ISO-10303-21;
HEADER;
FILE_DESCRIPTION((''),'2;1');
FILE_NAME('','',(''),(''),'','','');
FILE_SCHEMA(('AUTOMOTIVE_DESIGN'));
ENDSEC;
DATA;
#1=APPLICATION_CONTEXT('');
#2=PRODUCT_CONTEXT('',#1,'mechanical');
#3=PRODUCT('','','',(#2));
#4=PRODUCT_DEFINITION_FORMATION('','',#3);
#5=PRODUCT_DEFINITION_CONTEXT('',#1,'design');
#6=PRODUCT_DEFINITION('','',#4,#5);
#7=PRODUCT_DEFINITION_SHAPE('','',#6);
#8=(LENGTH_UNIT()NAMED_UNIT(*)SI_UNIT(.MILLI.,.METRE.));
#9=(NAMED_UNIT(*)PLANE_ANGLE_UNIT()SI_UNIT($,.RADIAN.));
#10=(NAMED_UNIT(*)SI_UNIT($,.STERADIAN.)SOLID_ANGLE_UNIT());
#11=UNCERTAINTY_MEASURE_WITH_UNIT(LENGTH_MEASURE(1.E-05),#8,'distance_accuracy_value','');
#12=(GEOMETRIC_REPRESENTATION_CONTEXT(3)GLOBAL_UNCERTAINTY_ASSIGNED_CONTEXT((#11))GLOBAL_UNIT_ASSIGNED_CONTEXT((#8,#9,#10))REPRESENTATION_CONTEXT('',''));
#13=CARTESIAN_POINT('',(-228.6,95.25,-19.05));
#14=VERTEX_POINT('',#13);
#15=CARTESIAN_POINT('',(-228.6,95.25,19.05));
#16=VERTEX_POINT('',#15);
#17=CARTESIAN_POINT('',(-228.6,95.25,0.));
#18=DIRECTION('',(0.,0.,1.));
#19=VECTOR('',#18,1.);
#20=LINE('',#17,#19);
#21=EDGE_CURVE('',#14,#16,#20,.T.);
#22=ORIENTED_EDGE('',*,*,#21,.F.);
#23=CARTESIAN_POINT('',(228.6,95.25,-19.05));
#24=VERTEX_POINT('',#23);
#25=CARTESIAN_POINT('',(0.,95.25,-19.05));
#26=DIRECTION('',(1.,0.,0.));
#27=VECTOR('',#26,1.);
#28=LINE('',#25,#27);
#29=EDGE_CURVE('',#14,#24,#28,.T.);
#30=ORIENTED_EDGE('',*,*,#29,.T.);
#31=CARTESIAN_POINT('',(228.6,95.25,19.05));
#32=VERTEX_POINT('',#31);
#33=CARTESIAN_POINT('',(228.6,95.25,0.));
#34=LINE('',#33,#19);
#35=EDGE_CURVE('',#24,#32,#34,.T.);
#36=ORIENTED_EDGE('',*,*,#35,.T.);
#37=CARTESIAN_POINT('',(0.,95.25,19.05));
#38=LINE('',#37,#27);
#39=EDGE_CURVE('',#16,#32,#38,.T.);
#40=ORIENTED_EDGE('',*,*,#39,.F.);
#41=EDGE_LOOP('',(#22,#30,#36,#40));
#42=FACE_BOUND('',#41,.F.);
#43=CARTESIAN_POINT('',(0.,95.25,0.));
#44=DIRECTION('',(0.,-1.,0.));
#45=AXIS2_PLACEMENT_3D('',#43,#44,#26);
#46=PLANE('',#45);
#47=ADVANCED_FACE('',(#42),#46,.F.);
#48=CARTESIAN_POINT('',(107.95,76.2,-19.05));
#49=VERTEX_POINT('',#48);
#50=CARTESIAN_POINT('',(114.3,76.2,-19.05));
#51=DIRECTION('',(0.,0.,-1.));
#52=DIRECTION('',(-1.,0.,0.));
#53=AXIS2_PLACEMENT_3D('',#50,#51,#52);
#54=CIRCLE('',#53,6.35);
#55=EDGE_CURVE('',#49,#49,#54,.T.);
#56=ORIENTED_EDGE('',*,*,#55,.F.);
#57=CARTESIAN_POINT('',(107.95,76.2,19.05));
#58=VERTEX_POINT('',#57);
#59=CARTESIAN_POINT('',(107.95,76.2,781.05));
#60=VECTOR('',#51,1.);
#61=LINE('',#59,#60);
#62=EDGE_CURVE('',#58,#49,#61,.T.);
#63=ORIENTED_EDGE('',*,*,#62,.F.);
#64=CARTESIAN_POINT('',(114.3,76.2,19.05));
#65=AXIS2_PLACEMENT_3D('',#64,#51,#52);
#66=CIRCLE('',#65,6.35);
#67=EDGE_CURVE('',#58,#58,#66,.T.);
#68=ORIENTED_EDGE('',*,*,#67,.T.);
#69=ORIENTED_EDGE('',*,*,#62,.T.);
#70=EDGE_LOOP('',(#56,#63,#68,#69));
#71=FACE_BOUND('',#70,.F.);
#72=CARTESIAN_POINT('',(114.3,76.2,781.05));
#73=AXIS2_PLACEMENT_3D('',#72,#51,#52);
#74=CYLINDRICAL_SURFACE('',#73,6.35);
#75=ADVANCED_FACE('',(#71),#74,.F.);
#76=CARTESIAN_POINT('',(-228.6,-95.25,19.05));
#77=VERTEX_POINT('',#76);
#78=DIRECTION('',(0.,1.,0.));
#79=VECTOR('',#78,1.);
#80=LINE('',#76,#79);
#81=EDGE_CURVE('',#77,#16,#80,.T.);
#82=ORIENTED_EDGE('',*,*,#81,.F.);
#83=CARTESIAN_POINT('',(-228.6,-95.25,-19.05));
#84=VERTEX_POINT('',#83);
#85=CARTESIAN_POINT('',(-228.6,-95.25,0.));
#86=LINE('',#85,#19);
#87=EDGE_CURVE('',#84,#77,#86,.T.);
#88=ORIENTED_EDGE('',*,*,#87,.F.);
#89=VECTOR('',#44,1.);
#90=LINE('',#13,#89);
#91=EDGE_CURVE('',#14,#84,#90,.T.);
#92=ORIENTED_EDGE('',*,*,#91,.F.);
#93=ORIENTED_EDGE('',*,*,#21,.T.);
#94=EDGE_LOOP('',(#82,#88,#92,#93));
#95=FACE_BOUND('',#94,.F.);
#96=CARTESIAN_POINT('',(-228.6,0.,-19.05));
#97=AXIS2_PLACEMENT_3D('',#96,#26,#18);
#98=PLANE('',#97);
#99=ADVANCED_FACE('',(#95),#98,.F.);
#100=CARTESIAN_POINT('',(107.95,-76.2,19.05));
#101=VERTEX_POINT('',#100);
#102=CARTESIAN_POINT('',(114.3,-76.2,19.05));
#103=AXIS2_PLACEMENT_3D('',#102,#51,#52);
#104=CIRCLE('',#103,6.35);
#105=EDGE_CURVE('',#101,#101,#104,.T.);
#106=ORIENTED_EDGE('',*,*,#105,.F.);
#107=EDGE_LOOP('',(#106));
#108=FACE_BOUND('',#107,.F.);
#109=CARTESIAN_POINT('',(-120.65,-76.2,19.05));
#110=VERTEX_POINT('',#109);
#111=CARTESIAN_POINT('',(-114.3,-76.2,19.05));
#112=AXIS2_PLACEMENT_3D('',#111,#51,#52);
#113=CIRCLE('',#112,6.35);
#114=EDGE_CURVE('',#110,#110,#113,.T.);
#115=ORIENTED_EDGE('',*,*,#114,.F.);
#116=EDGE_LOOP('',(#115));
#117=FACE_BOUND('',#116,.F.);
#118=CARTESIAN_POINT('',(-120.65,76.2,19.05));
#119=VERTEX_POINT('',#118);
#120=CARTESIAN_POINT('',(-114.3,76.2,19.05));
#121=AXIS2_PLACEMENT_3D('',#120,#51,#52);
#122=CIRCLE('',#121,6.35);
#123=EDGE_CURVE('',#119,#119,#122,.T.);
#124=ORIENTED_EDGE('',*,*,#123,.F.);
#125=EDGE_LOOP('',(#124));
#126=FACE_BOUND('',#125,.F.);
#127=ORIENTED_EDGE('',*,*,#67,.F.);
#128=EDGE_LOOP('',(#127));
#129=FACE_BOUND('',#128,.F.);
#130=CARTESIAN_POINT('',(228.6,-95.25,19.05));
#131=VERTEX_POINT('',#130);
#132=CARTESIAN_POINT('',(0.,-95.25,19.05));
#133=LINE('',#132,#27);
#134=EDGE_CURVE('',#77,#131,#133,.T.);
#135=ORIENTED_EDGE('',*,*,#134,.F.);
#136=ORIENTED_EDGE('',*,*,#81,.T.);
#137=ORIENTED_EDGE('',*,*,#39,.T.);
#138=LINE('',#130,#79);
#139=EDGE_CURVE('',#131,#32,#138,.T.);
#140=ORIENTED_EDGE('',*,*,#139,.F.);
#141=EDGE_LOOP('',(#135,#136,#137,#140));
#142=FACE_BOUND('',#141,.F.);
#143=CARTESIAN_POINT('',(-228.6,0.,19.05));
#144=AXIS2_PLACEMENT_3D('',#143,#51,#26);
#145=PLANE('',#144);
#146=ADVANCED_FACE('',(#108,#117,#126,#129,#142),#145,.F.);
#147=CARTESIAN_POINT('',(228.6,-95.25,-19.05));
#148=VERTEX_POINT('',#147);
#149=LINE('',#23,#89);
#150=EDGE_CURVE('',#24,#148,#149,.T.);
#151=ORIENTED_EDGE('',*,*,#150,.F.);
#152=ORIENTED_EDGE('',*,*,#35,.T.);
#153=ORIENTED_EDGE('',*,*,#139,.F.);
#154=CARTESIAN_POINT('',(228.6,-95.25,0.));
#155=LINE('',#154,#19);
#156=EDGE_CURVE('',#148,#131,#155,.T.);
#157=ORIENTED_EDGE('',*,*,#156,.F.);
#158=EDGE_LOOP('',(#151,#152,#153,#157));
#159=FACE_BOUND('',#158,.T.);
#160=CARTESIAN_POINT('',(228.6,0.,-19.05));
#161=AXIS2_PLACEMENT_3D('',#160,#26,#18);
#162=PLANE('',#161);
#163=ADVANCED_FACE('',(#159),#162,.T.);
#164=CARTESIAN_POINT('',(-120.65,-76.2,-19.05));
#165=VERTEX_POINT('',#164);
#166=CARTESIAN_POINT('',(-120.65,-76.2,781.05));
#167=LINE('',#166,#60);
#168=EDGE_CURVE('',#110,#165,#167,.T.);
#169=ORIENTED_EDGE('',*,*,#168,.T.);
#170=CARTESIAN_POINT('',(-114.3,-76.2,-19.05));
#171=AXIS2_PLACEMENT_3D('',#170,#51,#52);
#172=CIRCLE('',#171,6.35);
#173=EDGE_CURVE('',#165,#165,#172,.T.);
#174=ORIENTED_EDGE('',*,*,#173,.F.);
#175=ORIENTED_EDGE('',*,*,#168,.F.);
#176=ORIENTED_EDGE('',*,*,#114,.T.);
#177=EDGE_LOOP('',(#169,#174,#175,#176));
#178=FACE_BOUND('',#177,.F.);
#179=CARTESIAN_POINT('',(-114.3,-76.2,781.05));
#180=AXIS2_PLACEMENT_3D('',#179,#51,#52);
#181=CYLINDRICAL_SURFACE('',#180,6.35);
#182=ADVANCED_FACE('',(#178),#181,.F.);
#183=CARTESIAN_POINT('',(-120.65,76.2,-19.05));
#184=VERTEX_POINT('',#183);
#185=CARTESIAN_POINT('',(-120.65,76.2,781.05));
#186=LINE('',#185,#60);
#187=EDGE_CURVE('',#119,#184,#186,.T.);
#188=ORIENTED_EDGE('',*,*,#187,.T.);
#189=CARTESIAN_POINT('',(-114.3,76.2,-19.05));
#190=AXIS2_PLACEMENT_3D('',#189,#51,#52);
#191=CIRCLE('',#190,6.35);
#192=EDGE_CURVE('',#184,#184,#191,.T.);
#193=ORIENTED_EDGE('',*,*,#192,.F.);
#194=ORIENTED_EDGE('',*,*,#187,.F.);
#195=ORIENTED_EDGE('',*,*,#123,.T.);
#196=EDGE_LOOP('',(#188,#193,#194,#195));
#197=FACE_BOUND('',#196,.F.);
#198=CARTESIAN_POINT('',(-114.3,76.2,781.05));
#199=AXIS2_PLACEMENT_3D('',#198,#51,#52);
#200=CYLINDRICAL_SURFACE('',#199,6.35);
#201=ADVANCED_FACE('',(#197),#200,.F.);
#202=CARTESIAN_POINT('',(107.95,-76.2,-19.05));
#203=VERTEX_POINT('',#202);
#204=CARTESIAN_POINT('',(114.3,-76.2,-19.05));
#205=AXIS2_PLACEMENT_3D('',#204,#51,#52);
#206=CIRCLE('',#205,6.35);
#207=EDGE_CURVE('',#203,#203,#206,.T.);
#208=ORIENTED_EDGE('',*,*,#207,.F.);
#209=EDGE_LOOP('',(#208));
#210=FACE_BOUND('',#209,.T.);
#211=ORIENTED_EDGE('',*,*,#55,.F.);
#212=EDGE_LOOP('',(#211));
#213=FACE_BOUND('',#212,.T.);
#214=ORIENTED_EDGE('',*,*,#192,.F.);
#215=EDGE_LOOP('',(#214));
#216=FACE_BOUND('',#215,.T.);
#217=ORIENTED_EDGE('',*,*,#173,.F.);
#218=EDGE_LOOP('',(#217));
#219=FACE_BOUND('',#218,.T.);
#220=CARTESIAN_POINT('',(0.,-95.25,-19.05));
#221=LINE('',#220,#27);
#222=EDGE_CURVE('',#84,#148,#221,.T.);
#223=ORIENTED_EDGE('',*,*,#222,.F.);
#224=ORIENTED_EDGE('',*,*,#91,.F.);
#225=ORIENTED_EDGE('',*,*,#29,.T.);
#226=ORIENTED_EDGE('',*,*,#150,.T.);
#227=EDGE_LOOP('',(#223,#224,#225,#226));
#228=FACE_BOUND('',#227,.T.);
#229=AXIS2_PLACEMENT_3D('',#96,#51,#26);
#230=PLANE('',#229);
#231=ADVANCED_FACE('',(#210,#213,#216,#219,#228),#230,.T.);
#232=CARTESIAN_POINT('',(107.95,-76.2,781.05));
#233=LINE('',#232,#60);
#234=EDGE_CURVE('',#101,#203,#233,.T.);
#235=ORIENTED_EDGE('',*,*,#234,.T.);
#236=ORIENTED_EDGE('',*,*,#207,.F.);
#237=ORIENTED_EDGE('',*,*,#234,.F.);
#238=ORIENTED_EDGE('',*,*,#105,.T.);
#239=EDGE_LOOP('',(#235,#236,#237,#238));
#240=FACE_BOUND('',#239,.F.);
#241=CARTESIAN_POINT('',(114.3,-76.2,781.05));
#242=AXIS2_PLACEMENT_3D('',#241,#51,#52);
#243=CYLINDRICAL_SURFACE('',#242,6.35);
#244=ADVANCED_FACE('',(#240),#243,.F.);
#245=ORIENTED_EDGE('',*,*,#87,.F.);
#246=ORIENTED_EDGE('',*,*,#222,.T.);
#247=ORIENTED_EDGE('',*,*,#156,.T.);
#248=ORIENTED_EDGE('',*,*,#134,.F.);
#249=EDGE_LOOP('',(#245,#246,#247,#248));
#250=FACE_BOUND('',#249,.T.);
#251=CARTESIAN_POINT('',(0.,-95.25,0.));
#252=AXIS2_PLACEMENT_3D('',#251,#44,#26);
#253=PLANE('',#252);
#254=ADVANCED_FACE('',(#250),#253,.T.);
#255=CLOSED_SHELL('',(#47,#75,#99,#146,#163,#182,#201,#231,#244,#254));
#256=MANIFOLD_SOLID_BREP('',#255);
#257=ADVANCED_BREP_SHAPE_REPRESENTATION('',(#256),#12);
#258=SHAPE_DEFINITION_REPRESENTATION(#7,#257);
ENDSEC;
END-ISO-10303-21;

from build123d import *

# Parameters (mm, degrees)
F0_W       = 457.2
F0_H       = 38.1
F1_DEPTH   = 95.25
F4_D       = 12.7
F4_DEPTH   = 609.6
F4_TIP     = 3.8154649308
F4_2_D     = 12.7
F4_2_DEPTH = 609.6
F4_2_TIP   = 3.8154649308
F5_D       = 12.7
F5_DEPTH   = 609.6
F5_TIP     = 3.8154649308
F5_2_D     = 12.7
F5_2_DEPTH = 609.6
F5_2_TIP   = 3.8154649308
F6_D       = 12.7
F6_DEPTH   = 609.6
F6_TIP     = 3.8154649308
F6_2_D     = 12.7
F6_2_DEPTH = 609.6
F6_2_TIP   = 3.8154649308
F7_D       = 12.7
F7_DEPTH   = 609.6
F7_TIP     = 3.8154649308
F7_2_D     = 12.7
F7_2_DEPTH = 609.6
F7_2_TIP   = 3.8154649308


# Not quite as in the source:
# - a feature names something its author has since deleted; it is built from what else it names


with BuildPart() as f1:
    # F0 (on Front) → F1 (new body, symmetric)
    with BuildSketch(Plane.XZ):
        Rectangle(F0_W, F0_H)
    extrude(amount=F1_DEPTH, both=True)


with BuildPart() as f2_1:
    # F2: copy of F1
    add(f1.part.moved(Location((0, 0, 152.4))))

    # F4#2
    with Locations(Plane.XY.offset(171.45)):
        with Locations((-114.3, 76.2)):
            Hole(F4_2_D / 2, depth=F4_2_DEPTH)
            with Locations((0, 0, -(F4_2_DEPTH + F4_2_TIP / 2))):  # 118° drill point
                Cone(0, F4_2_D / 2, F4_2_TIP, mode=Mode.SUBTRACT)

    # F5#2
    with Locations(Plane.XY.offset(171.45)):
        with Locations((114.3, 76.2)):
            Hole(F5_2_D / 2, depth=F5_2_DEPTH)
            with Locations((0, 0, -(F5_2_DEPTH + F5_2_TIP / 2))):  # 118° drill point
                Cone(0, F5_2_D / 2, F5_2_TIP, mode=Mode.SUBTRACT)

    # F6#2
    with Locations(Plane.XY.offset(171.45)):
        with Locations((-114.3, -76.2)):
            Hole(F6_2_D / 2, depth=F6_2_DEPTH)
            with Locations((0, 0, -(F6_2_DEPTH + F6_2_TIP / 2))):  # 118° drill point
                Cone(0, F6_2_D / 2, F6_2_TIP, mode=Mode.SUBTRACT)

    # F7#2
    with Locations(Plane.XY.offset(171.45)):
        with Locations((114.3, -76.2)):
            Hole(F7_2_D / 2, depth=F7_2_DEPTH)
            with Locations((0, 0, -(F7_2_DEPTH + F7_2_TIP / 2))):  # 118° drill point
                Cone(0, F7_2_D / 2, F7_2_TIP, mode=Mode.SUBTRACT)


with BuildPart() as f1_1:
    add(f1.part)

    # F4
    with Locations(Plane.XY.offset(171.45)):
        with Locations((-114.3, 76.2)):
            Hole(F4_D / 2, depth=F4_DEPTH)
            with Locations((0, 0, -(F4_DEPTH + F4_TIP / 2))):  # 118° drill point
                Cone(0, F4_D / 2, F4_TIP, mode=Mode.SUBTRACT)

    # F5
    with Locations(Plane.XY.offset(171.45)):
        with Locations((114.3, 76.2)):
            Hole(F5_D / 2, depth=F5_DEPTH)
            with Locations((0, 0, -(F5_DEPTH + F5_TIP / 2))):  # 118° drill point
                Cone(0, F5_D / 2, F5_TIP, mode=Mode.SUBTRACT)

    # F6
    with Locations(Plane.XY.offset(171.45)):
        with Locations((-114.3, -76.2)):
            Hole(F6_D / 2, depth=F6_DEPTH)
            with Locations((0, 0, -(F6_DEPTH + F6_TIP / 2))):  # 118° drill point
                Cone(0, F6_D / 2, F6_TIP, mode=Mode.SUBTRACT)

    # F7
    with Locations(Plane.XY.offset(171.45)):
        with Locations((114.3, -76.2)):
            Hole(F7_D / 2, depth=F7_DEPTH)
            with Locations((0, 0, -(F7_DEPTH + F7_TIP / 2))):  # 118° drill point
                Cone(0, F7_D / 2, F7_TIP, mode=Mode.SUBTRACT)


solid = f1_1.part
